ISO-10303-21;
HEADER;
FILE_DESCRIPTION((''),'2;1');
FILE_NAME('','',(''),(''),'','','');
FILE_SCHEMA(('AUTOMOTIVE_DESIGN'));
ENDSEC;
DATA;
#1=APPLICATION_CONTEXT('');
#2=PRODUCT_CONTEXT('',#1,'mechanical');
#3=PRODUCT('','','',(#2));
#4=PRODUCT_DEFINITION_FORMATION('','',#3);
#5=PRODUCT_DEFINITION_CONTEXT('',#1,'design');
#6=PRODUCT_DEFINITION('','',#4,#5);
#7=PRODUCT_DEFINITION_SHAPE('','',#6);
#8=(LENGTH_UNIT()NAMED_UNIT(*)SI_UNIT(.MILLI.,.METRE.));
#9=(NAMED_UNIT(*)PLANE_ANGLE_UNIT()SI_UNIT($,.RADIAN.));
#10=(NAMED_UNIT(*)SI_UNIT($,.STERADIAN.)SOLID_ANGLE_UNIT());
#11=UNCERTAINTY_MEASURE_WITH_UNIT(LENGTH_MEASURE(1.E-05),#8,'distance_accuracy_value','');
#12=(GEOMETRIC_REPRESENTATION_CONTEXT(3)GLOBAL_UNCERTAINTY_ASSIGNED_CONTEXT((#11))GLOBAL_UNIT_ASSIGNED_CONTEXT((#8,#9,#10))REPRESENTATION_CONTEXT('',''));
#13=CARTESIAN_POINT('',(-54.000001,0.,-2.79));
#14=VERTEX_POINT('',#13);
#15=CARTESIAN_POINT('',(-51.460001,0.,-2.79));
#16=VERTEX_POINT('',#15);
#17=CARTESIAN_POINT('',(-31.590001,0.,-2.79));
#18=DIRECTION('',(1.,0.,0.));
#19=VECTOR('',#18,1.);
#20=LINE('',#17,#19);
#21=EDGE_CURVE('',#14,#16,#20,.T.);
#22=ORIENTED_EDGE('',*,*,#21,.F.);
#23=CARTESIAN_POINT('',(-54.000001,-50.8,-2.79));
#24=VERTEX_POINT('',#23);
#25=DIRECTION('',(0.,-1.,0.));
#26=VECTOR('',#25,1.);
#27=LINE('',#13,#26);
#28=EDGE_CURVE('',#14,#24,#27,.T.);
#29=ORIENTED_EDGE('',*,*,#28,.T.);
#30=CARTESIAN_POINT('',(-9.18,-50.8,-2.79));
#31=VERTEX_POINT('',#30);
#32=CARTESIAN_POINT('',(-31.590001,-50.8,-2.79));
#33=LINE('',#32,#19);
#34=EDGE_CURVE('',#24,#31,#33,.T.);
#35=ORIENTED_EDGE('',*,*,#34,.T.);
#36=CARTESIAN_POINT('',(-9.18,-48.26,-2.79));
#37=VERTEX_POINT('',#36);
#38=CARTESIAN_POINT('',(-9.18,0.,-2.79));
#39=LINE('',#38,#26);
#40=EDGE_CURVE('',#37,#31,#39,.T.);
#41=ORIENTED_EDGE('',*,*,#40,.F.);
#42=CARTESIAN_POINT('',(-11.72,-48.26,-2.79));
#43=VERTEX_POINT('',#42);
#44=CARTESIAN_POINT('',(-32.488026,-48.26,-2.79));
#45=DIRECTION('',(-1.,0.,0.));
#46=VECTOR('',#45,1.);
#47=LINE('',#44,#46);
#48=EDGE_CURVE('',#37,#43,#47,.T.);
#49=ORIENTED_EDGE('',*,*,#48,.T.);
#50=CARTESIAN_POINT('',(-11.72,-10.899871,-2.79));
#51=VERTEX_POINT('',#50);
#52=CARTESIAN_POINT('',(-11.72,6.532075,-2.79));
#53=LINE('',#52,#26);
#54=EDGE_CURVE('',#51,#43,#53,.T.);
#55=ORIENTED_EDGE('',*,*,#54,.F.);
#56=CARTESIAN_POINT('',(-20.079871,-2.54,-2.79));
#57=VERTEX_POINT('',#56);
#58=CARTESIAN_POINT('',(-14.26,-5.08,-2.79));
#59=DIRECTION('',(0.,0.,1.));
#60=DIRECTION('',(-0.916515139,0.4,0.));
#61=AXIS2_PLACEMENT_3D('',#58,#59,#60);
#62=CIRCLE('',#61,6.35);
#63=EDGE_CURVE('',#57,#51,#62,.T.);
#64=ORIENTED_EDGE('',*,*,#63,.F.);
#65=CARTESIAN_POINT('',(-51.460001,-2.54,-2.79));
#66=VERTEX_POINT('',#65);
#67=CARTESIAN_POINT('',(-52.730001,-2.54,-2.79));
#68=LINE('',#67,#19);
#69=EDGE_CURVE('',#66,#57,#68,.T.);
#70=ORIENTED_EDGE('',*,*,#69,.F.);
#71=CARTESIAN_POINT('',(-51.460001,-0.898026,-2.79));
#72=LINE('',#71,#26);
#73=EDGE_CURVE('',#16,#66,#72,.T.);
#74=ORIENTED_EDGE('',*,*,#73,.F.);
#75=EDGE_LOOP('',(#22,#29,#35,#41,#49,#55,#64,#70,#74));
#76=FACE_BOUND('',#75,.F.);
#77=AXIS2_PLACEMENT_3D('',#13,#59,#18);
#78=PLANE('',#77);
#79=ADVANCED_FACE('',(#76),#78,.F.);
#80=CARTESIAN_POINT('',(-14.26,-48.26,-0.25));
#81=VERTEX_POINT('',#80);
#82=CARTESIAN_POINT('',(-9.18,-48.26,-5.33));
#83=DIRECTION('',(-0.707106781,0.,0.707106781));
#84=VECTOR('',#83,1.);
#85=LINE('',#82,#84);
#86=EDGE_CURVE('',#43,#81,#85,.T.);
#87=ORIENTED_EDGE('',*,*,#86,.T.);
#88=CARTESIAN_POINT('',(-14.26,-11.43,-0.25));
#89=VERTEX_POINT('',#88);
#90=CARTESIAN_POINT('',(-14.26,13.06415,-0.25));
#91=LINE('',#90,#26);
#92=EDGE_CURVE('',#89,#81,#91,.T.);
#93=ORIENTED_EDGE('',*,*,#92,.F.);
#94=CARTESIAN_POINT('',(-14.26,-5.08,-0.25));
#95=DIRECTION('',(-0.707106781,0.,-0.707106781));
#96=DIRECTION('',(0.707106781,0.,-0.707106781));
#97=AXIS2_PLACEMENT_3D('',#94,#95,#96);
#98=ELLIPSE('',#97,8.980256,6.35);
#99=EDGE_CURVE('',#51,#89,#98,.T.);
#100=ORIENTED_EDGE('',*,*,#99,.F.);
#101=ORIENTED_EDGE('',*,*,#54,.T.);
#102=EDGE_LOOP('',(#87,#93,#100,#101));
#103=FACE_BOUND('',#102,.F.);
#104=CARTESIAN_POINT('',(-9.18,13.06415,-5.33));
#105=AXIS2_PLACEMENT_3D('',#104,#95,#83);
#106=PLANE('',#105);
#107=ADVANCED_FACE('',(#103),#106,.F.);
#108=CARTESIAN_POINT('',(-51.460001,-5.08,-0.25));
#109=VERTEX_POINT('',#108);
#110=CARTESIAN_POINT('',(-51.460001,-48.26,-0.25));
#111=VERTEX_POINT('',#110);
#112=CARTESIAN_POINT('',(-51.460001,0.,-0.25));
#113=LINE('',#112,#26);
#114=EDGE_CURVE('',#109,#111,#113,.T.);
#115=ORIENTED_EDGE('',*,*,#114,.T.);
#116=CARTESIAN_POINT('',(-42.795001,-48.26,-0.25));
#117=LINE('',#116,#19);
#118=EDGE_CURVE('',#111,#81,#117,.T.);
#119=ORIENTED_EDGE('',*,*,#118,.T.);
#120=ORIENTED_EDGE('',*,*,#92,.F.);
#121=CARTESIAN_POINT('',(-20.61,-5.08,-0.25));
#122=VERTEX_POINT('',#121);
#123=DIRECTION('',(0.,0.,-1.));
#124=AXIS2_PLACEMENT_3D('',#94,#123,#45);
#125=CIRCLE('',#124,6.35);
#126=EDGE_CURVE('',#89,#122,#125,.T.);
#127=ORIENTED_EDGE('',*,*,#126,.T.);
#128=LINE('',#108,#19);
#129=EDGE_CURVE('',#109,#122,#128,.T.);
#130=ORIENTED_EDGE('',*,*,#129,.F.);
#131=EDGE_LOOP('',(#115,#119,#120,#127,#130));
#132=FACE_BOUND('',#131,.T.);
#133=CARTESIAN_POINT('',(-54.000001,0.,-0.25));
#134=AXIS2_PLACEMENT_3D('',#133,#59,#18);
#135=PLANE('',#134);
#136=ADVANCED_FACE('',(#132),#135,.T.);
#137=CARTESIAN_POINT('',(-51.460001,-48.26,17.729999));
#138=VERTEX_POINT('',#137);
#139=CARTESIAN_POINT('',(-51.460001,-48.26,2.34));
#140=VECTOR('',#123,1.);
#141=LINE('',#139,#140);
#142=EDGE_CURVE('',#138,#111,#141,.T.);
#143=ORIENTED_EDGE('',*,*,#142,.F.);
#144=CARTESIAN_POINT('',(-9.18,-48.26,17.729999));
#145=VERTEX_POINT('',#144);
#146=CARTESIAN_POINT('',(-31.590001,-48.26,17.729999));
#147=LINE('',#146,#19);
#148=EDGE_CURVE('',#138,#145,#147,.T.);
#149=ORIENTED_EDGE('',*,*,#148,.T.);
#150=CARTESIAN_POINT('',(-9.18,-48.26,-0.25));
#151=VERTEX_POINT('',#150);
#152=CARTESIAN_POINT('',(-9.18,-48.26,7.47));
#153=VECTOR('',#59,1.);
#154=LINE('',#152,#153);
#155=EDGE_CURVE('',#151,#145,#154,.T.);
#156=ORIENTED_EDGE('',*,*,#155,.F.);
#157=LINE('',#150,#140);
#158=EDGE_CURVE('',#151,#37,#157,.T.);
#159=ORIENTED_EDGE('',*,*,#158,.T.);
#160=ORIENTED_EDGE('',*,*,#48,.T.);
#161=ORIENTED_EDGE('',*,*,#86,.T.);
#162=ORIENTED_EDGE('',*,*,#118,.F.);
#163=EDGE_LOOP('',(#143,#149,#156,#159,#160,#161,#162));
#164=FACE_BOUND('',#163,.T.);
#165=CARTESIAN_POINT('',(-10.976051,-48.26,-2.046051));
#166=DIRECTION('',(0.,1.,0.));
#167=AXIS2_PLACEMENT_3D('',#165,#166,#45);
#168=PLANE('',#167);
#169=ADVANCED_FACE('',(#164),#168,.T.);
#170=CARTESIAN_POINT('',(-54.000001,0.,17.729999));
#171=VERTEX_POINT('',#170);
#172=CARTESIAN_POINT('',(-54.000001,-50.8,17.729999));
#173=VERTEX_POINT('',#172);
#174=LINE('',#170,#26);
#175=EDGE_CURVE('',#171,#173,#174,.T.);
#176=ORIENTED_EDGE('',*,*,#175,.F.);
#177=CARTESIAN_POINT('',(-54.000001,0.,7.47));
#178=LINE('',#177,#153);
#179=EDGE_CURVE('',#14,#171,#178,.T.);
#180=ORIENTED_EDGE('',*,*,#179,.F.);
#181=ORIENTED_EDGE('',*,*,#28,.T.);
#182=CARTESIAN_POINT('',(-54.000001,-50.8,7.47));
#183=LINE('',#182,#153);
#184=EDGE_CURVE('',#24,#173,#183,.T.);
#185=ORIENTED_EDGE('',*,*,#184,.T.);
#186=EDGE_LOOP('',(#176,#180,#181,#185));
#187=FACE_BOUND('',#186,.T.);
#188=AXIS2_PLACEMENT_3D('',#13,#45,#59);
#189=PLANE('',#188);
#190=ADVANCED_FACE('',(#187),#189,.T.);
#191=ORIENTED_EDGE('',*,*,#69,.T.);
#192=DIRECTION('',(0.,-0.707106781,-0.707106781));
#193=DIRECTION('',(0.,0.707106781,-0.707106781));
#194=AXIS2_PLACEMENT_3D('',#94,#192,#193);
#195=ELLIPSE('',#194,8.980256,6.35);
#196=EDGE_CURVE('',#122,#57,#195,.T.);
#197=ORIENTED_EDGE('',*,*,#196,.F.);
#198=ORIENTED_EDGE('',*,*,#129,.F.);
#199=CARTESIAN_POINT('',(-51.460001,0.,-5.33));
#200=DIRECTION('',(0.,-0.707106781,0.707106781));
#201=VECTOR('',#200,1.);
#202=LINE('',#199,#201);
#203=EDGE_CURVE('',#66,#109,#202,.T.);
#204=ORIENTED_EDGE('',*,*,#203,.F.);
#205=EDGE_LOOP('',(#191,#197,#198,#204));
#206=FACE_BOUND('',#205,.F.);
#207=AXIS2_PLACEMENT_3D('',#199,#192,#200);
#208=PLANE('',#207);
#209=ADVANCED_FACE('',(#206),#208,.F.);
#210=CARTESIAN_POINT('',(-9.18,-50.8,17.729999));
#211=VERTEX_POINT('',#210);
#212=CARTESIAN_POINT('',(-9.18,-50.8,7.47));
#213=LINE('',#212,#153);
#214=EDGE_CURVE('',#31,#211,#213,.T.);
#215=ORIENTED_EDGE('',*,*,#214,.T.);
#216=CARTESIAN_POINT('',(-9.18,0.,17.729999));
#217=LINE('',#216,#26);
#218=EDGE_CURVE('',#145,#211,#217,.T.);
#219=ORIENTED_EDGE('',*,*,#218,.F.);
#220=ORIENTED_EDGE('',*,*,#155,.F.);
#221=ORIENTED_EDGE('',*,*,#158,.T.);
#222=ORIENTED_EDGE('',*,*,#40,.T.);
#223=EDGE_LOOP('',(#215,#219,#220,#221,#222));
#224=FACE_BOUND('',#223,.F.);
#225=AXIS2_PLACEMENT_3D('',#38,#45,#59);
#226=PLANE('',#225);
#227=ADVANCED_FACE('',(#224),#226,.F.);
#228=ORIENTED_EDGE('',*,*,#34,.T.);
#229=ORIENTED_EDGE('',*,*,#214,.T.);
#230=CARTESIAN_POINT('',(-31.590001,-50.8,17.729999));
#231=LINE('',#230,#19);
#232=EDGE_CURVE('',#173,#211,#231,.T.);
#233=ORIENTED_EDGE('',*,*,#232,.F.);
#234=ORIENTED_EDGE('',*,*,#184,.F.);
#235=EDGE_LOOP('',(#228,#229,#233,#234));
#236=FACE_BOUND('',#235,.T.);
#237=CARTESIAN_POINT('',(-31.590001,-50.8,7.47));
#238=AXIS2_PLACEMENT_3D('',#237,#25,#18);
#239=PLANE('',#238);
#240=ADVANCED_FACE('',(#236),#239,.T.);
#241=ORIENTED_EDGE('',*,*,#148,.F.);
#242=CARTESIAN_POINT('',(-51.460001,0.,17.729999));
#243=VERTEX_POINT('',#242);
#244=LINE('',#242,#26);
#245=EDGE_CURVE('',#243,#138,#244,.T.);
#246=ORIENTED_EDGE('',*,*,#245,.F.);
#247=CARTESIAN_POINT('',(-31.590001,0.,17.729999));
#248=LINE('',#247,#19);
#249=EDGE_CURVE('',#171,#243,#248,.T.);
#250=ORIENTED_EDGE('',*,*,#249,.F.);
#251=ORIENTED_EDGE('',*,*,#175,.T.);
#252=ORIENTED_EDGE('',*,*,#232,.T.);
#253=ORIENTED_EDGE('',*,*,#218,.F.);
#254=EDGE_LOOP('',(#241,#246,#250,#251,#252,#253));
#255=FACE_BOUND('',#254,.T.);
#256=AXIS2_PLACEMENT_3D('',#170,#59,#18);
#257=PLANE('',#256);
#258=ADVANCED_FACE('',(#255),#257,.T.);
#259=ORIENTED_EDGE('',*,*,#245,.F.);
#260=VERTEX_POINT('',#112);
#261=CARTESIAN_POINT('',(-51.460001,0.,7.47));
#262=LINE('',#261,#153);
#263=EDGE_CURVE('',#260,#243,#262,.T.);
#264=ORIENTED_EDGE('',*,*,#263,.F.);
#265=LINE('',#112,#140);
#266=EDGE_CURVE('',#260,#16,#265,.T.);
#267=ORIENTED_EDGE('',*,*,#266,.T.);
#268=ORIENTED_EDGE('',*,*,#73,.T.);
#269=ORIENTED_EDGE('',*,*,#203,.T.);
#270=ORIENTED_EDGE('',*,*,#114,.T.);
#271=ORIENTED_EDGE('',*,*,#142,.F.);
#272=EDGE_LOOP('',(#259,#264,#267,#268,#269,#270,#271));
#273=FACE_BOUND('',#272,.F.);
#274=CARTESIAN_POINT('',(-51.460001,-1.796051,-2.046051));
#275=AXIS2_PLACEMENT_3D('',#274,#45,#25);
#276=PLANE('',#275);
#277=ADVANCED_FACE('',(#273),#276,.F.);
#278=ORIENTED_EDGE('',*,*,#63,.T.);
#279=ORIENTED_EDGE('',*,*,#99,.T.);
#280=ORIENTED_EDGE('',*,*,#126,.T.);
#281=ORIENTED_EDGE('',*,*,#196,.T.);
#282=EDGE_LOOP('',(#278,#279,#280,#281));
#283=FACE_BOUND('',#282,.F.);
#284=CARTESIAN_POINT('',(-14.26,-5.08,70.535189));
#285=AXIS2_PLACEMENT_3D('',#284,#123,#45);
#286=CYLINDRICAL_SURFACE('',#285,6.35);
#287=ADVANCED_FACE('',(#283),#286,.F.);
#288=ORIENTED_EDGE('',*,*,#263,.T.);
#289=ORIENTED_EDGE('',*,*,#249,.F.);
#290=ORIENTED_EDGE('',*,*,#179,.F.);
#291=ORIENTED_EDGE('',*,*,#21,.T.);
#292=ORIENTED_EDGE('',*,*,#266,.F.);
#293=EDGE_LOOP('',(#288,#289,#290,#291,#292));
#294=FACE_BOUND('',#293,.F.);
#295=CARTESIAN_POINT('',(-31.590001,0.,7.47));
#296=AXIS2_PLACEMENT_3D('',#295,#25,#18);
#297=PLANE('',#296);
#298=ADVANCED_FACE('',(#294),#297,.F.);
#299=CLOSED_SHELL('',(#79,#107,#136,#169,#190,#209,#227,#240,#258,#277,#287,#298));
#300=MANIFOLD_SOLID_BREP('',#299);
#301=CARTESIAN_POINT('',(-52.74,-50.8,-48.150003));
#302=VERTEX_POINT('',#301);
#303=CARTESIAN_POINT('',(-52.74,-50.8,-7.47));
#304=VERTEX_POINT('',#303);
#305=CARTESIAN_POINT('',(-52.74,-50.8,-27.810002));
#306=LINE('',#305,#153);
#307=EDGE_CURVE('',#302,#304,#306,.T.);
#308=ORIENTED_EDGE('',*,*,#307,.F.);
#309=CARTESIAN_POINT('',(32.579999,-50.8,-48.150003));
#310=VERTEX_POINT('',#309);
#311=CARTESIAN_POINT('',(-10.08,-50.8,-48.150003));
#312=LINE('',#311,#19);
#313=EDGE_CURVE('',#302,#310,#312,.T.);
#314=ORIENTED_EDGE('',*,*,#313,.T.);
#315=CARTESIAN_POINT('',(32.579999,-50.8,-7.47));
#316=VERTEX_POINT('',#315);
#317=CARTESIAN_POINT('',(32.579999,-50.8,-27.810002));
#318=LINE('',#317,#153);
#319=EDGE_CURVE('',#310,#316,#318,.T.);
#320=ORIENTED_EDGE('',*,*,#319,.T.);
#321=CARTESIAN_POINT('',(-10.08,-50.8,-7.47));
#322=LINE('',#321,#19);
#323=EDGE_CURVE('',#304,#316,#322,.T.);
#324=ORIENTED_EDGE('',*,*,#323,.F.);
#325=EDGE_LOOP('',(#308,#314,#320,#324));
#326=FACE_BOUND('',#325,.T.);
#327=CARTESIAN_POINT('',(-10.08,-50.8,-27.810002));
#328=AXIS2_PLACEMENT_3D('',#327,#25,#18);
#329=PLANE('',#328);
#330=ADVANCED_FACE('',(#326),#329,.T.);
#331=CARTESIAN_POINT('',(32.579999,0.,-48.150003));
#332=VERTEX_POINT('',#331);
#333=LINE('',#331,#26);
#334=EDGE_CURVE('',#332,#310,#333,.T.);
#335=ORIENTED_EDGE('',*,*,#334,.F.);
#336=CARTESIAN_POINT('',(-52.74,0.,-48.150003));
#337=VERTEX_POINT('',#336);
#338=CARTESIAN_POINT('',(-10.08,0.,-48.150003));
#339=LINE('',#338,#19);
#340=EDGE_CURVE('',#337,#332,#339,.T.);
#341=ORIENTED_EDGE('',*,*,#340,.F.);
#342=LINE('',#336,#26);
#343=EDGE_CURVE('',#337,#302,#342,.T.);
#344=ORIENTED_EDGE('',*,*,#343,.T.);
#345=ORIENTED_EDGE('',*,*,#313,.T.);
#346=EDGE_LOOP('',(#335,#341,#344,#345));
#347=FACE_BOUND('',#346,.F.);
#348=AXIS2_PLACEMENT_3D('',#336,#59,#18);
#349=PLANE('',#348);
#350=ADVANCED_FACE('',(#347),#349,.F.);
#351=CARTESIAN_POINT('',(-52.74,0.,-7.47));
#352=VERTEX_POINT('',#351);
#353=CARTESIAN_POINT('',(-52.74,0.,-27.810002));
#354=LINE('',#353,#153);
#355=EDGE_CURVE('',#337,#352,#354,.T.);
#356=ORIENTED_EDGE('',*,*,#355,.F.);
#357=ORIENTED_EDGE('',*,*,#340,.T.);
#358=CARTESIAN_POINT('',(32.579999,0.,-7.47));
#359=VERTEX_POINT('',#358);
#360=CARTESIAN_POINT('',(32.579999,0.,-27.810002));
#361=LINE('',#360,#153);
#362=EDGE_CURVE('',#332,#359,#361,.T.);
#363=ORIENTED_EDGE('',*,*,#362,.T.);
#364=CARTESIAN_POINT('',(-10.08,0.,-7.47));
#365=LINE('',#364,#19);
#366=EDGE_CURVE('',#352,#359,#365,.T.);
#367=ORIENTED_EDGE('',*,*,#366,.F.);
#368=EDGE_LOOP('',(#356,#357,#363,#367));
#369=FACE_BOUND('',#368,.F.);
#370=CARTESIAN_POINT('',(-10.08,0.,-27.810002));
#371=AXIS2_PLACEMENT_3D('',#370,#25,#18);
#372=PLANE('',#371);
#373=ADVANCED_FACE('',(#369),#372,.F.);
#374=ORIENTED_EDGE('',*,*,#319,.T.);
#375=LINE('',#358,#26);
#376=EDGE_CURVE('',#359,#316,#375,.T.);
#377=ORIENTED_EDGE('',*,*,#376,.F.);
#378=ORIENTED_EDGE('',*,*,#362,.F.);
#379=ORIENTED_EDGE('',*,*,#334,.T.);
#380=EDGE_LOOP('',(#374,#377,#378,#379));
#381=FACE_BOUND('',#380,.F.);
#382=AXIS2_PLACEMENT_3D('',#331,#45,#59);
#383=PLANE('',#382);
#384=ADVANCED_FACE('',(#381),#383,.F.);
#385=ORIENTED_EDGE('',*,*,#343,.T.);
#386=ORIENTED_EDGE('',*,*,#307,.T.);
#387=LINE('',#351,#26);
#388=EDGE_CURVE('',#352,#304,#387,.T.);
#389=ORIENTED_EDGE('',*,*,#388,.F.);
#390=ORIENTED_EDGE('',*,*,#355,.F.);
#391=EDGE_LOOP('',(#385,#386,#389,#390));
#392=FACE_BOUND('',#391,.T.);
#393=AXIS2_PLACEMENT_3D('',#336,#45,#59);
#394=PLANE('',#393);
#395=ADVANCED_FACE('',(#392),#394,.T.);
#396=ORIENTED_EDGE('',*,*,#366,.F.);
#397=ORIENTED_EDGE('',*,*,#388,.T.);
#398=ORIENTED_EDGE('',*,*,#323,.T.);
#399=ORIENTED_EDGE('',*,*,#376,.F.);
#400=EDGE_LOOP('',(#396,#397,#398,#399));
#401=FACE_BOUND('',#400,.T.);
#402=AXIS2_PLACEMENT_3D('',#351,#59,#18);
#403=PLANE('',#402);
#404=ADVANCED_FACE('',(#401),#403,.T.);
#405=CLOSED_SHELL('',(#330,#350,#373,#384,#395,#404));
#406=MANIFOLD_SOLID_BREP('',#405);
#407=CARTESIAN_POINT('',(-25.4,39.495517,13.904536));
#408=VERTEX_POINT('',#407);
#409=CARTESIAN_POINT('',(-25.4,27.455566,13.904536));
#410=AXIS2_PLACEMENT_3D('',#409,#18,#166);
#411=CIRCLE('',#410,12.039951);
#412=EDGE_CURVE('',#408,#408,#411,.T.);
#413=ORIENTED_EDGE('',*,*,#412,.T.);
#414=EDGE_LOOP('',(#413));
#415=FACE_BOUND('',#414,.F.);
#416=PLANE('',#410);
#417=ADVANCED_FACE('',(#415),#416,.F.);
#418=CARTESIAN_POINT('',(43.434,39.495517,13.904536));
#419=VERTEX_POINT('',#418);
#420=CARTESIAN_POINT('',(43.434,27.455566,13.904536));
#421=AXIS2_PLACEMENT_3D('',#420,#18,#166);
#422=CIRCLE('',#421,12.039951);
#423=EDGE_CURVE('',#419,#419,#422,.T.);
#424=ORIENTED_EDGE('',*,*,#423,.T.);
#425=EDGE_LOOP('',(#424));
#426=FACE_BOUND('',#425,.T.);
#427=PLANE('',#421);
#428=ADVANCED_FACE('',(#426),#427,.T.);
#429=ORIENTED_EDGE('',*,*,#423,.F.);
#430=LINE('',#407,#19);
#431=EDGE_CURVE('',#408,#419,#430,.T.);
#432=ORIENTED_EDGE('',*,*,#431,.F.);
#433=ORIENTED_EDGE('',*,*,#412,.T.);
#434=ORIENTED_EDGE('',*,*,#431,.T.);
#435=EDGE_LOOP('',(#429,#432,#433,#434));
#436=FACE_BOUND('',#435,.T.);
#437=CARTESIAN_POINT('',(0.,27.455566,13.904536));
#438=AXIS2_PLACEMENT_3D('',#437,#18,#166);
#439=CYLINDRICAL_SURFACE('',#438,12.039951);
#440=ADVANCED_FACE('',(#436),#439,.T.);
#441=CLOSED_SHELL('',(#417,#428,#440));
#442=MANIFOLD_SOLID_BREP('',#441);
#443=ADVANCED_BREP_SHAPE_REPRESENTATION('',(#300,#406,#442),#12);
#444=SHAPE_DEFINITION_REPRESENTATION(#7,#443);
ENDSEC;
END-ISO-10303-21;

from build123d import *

# Parameters (mm, degrees)
F0_W          = 85.3199996054
F0_H          = 40.6800028868
F1_DEPTH      = 50.8
F0_W_2        = 44.8200013489
F0_H_2        = 20.5199993216
F2_T          = -2.54
F3_T1_DEPTH   = 55.3441509277
F3_T3_DEPTH   = 61.3241495789
F5_D          = 12.7
F6_R          = 12.039951047
F7_DEPTH      = 43.434
F7_DEPTH_BACK = 25.4


# Not quite as in the source:
# - a fillet or chamfer that OpenCascade refuses, or shapes differently, is made with other operations: its cross-section is extruded or revolved along the edge and cut away or added


with BuildPart() as f1:
    # F0 (on Front) → F1 (new body)
    with BuildSketch(Plane.XZ):
        with Locations((-10.0800003856, -27.810001513)):
            Rectangle(F0_W, F0_H)
    extrude(amount=F1_DEPTH)


with BuildPart() as f1b:
    # F0 (on Front) → F1, piece 2 (new body)
    with BuildSketch(Plane.XZ):
        with Locations((-31.5900007263, 7.4699998368)):
            Rectangle(F0_W_2, F0_H_2)
    extrude(amount=F1_DEPTH)

    # F2
    f2_openings = [f1b.faces().sort_by_distance(p)[0] for p in [
        (-31.590001, -25.4, 17.729999),
        (-31.590001, 0, 7.47),
        (-9.18, -25.4, 7.47),
    ]]
    offset(amount=F2_T, openings=f2_openings)

    # F3: chamfer of 5.08 on 2 edges, made by hand

    # F3_s2 → F3_t1 (cut)
    with BuildSketch(Plane.YZ.offset(-51.4600014007)):
        Polygon((0, -5.329999824), (-5.08, -0.249999824), (0, -0.249999824), align=None)
    extrude(amount=F3_T1_DEPTH, mode=Mode.SUBTRACT)

    # F3_s4 → F3_t3 (cut)
    with BuildSketch(Plane.XZ.offset(-13.0641495789)):
        Polygon((-9.1800000519, -5.329999824), (-14.2600000519, -0.249999824), (-9.1800000519, -0.249999824), align=None)
    extrude(amount=F3_T3_DEPTH, mode=Mode.SUBTRACT)

    # F5 (through all)
    with Locations(Plane.XY.offset(-0.249999824)):
        with Locations((-14.2600000519, -5.08)):
            Hole(F5_D / 2)


with BuildPart() as f7:
    # F6 (on Right) → F7 (new body, two sides)
    with BuildSketch(Plane.YZ) as f7_sk:
        with Locations((27.455566451, 13.9045361429)):
            Circle(F6_R)
    extrude(amount=F7_DEPTH)
    extrude(f7_sk.sketch, amount=-F7_DEPTH_BACK)


solid = Compound([f1.part, f1b.part, f7.part])
